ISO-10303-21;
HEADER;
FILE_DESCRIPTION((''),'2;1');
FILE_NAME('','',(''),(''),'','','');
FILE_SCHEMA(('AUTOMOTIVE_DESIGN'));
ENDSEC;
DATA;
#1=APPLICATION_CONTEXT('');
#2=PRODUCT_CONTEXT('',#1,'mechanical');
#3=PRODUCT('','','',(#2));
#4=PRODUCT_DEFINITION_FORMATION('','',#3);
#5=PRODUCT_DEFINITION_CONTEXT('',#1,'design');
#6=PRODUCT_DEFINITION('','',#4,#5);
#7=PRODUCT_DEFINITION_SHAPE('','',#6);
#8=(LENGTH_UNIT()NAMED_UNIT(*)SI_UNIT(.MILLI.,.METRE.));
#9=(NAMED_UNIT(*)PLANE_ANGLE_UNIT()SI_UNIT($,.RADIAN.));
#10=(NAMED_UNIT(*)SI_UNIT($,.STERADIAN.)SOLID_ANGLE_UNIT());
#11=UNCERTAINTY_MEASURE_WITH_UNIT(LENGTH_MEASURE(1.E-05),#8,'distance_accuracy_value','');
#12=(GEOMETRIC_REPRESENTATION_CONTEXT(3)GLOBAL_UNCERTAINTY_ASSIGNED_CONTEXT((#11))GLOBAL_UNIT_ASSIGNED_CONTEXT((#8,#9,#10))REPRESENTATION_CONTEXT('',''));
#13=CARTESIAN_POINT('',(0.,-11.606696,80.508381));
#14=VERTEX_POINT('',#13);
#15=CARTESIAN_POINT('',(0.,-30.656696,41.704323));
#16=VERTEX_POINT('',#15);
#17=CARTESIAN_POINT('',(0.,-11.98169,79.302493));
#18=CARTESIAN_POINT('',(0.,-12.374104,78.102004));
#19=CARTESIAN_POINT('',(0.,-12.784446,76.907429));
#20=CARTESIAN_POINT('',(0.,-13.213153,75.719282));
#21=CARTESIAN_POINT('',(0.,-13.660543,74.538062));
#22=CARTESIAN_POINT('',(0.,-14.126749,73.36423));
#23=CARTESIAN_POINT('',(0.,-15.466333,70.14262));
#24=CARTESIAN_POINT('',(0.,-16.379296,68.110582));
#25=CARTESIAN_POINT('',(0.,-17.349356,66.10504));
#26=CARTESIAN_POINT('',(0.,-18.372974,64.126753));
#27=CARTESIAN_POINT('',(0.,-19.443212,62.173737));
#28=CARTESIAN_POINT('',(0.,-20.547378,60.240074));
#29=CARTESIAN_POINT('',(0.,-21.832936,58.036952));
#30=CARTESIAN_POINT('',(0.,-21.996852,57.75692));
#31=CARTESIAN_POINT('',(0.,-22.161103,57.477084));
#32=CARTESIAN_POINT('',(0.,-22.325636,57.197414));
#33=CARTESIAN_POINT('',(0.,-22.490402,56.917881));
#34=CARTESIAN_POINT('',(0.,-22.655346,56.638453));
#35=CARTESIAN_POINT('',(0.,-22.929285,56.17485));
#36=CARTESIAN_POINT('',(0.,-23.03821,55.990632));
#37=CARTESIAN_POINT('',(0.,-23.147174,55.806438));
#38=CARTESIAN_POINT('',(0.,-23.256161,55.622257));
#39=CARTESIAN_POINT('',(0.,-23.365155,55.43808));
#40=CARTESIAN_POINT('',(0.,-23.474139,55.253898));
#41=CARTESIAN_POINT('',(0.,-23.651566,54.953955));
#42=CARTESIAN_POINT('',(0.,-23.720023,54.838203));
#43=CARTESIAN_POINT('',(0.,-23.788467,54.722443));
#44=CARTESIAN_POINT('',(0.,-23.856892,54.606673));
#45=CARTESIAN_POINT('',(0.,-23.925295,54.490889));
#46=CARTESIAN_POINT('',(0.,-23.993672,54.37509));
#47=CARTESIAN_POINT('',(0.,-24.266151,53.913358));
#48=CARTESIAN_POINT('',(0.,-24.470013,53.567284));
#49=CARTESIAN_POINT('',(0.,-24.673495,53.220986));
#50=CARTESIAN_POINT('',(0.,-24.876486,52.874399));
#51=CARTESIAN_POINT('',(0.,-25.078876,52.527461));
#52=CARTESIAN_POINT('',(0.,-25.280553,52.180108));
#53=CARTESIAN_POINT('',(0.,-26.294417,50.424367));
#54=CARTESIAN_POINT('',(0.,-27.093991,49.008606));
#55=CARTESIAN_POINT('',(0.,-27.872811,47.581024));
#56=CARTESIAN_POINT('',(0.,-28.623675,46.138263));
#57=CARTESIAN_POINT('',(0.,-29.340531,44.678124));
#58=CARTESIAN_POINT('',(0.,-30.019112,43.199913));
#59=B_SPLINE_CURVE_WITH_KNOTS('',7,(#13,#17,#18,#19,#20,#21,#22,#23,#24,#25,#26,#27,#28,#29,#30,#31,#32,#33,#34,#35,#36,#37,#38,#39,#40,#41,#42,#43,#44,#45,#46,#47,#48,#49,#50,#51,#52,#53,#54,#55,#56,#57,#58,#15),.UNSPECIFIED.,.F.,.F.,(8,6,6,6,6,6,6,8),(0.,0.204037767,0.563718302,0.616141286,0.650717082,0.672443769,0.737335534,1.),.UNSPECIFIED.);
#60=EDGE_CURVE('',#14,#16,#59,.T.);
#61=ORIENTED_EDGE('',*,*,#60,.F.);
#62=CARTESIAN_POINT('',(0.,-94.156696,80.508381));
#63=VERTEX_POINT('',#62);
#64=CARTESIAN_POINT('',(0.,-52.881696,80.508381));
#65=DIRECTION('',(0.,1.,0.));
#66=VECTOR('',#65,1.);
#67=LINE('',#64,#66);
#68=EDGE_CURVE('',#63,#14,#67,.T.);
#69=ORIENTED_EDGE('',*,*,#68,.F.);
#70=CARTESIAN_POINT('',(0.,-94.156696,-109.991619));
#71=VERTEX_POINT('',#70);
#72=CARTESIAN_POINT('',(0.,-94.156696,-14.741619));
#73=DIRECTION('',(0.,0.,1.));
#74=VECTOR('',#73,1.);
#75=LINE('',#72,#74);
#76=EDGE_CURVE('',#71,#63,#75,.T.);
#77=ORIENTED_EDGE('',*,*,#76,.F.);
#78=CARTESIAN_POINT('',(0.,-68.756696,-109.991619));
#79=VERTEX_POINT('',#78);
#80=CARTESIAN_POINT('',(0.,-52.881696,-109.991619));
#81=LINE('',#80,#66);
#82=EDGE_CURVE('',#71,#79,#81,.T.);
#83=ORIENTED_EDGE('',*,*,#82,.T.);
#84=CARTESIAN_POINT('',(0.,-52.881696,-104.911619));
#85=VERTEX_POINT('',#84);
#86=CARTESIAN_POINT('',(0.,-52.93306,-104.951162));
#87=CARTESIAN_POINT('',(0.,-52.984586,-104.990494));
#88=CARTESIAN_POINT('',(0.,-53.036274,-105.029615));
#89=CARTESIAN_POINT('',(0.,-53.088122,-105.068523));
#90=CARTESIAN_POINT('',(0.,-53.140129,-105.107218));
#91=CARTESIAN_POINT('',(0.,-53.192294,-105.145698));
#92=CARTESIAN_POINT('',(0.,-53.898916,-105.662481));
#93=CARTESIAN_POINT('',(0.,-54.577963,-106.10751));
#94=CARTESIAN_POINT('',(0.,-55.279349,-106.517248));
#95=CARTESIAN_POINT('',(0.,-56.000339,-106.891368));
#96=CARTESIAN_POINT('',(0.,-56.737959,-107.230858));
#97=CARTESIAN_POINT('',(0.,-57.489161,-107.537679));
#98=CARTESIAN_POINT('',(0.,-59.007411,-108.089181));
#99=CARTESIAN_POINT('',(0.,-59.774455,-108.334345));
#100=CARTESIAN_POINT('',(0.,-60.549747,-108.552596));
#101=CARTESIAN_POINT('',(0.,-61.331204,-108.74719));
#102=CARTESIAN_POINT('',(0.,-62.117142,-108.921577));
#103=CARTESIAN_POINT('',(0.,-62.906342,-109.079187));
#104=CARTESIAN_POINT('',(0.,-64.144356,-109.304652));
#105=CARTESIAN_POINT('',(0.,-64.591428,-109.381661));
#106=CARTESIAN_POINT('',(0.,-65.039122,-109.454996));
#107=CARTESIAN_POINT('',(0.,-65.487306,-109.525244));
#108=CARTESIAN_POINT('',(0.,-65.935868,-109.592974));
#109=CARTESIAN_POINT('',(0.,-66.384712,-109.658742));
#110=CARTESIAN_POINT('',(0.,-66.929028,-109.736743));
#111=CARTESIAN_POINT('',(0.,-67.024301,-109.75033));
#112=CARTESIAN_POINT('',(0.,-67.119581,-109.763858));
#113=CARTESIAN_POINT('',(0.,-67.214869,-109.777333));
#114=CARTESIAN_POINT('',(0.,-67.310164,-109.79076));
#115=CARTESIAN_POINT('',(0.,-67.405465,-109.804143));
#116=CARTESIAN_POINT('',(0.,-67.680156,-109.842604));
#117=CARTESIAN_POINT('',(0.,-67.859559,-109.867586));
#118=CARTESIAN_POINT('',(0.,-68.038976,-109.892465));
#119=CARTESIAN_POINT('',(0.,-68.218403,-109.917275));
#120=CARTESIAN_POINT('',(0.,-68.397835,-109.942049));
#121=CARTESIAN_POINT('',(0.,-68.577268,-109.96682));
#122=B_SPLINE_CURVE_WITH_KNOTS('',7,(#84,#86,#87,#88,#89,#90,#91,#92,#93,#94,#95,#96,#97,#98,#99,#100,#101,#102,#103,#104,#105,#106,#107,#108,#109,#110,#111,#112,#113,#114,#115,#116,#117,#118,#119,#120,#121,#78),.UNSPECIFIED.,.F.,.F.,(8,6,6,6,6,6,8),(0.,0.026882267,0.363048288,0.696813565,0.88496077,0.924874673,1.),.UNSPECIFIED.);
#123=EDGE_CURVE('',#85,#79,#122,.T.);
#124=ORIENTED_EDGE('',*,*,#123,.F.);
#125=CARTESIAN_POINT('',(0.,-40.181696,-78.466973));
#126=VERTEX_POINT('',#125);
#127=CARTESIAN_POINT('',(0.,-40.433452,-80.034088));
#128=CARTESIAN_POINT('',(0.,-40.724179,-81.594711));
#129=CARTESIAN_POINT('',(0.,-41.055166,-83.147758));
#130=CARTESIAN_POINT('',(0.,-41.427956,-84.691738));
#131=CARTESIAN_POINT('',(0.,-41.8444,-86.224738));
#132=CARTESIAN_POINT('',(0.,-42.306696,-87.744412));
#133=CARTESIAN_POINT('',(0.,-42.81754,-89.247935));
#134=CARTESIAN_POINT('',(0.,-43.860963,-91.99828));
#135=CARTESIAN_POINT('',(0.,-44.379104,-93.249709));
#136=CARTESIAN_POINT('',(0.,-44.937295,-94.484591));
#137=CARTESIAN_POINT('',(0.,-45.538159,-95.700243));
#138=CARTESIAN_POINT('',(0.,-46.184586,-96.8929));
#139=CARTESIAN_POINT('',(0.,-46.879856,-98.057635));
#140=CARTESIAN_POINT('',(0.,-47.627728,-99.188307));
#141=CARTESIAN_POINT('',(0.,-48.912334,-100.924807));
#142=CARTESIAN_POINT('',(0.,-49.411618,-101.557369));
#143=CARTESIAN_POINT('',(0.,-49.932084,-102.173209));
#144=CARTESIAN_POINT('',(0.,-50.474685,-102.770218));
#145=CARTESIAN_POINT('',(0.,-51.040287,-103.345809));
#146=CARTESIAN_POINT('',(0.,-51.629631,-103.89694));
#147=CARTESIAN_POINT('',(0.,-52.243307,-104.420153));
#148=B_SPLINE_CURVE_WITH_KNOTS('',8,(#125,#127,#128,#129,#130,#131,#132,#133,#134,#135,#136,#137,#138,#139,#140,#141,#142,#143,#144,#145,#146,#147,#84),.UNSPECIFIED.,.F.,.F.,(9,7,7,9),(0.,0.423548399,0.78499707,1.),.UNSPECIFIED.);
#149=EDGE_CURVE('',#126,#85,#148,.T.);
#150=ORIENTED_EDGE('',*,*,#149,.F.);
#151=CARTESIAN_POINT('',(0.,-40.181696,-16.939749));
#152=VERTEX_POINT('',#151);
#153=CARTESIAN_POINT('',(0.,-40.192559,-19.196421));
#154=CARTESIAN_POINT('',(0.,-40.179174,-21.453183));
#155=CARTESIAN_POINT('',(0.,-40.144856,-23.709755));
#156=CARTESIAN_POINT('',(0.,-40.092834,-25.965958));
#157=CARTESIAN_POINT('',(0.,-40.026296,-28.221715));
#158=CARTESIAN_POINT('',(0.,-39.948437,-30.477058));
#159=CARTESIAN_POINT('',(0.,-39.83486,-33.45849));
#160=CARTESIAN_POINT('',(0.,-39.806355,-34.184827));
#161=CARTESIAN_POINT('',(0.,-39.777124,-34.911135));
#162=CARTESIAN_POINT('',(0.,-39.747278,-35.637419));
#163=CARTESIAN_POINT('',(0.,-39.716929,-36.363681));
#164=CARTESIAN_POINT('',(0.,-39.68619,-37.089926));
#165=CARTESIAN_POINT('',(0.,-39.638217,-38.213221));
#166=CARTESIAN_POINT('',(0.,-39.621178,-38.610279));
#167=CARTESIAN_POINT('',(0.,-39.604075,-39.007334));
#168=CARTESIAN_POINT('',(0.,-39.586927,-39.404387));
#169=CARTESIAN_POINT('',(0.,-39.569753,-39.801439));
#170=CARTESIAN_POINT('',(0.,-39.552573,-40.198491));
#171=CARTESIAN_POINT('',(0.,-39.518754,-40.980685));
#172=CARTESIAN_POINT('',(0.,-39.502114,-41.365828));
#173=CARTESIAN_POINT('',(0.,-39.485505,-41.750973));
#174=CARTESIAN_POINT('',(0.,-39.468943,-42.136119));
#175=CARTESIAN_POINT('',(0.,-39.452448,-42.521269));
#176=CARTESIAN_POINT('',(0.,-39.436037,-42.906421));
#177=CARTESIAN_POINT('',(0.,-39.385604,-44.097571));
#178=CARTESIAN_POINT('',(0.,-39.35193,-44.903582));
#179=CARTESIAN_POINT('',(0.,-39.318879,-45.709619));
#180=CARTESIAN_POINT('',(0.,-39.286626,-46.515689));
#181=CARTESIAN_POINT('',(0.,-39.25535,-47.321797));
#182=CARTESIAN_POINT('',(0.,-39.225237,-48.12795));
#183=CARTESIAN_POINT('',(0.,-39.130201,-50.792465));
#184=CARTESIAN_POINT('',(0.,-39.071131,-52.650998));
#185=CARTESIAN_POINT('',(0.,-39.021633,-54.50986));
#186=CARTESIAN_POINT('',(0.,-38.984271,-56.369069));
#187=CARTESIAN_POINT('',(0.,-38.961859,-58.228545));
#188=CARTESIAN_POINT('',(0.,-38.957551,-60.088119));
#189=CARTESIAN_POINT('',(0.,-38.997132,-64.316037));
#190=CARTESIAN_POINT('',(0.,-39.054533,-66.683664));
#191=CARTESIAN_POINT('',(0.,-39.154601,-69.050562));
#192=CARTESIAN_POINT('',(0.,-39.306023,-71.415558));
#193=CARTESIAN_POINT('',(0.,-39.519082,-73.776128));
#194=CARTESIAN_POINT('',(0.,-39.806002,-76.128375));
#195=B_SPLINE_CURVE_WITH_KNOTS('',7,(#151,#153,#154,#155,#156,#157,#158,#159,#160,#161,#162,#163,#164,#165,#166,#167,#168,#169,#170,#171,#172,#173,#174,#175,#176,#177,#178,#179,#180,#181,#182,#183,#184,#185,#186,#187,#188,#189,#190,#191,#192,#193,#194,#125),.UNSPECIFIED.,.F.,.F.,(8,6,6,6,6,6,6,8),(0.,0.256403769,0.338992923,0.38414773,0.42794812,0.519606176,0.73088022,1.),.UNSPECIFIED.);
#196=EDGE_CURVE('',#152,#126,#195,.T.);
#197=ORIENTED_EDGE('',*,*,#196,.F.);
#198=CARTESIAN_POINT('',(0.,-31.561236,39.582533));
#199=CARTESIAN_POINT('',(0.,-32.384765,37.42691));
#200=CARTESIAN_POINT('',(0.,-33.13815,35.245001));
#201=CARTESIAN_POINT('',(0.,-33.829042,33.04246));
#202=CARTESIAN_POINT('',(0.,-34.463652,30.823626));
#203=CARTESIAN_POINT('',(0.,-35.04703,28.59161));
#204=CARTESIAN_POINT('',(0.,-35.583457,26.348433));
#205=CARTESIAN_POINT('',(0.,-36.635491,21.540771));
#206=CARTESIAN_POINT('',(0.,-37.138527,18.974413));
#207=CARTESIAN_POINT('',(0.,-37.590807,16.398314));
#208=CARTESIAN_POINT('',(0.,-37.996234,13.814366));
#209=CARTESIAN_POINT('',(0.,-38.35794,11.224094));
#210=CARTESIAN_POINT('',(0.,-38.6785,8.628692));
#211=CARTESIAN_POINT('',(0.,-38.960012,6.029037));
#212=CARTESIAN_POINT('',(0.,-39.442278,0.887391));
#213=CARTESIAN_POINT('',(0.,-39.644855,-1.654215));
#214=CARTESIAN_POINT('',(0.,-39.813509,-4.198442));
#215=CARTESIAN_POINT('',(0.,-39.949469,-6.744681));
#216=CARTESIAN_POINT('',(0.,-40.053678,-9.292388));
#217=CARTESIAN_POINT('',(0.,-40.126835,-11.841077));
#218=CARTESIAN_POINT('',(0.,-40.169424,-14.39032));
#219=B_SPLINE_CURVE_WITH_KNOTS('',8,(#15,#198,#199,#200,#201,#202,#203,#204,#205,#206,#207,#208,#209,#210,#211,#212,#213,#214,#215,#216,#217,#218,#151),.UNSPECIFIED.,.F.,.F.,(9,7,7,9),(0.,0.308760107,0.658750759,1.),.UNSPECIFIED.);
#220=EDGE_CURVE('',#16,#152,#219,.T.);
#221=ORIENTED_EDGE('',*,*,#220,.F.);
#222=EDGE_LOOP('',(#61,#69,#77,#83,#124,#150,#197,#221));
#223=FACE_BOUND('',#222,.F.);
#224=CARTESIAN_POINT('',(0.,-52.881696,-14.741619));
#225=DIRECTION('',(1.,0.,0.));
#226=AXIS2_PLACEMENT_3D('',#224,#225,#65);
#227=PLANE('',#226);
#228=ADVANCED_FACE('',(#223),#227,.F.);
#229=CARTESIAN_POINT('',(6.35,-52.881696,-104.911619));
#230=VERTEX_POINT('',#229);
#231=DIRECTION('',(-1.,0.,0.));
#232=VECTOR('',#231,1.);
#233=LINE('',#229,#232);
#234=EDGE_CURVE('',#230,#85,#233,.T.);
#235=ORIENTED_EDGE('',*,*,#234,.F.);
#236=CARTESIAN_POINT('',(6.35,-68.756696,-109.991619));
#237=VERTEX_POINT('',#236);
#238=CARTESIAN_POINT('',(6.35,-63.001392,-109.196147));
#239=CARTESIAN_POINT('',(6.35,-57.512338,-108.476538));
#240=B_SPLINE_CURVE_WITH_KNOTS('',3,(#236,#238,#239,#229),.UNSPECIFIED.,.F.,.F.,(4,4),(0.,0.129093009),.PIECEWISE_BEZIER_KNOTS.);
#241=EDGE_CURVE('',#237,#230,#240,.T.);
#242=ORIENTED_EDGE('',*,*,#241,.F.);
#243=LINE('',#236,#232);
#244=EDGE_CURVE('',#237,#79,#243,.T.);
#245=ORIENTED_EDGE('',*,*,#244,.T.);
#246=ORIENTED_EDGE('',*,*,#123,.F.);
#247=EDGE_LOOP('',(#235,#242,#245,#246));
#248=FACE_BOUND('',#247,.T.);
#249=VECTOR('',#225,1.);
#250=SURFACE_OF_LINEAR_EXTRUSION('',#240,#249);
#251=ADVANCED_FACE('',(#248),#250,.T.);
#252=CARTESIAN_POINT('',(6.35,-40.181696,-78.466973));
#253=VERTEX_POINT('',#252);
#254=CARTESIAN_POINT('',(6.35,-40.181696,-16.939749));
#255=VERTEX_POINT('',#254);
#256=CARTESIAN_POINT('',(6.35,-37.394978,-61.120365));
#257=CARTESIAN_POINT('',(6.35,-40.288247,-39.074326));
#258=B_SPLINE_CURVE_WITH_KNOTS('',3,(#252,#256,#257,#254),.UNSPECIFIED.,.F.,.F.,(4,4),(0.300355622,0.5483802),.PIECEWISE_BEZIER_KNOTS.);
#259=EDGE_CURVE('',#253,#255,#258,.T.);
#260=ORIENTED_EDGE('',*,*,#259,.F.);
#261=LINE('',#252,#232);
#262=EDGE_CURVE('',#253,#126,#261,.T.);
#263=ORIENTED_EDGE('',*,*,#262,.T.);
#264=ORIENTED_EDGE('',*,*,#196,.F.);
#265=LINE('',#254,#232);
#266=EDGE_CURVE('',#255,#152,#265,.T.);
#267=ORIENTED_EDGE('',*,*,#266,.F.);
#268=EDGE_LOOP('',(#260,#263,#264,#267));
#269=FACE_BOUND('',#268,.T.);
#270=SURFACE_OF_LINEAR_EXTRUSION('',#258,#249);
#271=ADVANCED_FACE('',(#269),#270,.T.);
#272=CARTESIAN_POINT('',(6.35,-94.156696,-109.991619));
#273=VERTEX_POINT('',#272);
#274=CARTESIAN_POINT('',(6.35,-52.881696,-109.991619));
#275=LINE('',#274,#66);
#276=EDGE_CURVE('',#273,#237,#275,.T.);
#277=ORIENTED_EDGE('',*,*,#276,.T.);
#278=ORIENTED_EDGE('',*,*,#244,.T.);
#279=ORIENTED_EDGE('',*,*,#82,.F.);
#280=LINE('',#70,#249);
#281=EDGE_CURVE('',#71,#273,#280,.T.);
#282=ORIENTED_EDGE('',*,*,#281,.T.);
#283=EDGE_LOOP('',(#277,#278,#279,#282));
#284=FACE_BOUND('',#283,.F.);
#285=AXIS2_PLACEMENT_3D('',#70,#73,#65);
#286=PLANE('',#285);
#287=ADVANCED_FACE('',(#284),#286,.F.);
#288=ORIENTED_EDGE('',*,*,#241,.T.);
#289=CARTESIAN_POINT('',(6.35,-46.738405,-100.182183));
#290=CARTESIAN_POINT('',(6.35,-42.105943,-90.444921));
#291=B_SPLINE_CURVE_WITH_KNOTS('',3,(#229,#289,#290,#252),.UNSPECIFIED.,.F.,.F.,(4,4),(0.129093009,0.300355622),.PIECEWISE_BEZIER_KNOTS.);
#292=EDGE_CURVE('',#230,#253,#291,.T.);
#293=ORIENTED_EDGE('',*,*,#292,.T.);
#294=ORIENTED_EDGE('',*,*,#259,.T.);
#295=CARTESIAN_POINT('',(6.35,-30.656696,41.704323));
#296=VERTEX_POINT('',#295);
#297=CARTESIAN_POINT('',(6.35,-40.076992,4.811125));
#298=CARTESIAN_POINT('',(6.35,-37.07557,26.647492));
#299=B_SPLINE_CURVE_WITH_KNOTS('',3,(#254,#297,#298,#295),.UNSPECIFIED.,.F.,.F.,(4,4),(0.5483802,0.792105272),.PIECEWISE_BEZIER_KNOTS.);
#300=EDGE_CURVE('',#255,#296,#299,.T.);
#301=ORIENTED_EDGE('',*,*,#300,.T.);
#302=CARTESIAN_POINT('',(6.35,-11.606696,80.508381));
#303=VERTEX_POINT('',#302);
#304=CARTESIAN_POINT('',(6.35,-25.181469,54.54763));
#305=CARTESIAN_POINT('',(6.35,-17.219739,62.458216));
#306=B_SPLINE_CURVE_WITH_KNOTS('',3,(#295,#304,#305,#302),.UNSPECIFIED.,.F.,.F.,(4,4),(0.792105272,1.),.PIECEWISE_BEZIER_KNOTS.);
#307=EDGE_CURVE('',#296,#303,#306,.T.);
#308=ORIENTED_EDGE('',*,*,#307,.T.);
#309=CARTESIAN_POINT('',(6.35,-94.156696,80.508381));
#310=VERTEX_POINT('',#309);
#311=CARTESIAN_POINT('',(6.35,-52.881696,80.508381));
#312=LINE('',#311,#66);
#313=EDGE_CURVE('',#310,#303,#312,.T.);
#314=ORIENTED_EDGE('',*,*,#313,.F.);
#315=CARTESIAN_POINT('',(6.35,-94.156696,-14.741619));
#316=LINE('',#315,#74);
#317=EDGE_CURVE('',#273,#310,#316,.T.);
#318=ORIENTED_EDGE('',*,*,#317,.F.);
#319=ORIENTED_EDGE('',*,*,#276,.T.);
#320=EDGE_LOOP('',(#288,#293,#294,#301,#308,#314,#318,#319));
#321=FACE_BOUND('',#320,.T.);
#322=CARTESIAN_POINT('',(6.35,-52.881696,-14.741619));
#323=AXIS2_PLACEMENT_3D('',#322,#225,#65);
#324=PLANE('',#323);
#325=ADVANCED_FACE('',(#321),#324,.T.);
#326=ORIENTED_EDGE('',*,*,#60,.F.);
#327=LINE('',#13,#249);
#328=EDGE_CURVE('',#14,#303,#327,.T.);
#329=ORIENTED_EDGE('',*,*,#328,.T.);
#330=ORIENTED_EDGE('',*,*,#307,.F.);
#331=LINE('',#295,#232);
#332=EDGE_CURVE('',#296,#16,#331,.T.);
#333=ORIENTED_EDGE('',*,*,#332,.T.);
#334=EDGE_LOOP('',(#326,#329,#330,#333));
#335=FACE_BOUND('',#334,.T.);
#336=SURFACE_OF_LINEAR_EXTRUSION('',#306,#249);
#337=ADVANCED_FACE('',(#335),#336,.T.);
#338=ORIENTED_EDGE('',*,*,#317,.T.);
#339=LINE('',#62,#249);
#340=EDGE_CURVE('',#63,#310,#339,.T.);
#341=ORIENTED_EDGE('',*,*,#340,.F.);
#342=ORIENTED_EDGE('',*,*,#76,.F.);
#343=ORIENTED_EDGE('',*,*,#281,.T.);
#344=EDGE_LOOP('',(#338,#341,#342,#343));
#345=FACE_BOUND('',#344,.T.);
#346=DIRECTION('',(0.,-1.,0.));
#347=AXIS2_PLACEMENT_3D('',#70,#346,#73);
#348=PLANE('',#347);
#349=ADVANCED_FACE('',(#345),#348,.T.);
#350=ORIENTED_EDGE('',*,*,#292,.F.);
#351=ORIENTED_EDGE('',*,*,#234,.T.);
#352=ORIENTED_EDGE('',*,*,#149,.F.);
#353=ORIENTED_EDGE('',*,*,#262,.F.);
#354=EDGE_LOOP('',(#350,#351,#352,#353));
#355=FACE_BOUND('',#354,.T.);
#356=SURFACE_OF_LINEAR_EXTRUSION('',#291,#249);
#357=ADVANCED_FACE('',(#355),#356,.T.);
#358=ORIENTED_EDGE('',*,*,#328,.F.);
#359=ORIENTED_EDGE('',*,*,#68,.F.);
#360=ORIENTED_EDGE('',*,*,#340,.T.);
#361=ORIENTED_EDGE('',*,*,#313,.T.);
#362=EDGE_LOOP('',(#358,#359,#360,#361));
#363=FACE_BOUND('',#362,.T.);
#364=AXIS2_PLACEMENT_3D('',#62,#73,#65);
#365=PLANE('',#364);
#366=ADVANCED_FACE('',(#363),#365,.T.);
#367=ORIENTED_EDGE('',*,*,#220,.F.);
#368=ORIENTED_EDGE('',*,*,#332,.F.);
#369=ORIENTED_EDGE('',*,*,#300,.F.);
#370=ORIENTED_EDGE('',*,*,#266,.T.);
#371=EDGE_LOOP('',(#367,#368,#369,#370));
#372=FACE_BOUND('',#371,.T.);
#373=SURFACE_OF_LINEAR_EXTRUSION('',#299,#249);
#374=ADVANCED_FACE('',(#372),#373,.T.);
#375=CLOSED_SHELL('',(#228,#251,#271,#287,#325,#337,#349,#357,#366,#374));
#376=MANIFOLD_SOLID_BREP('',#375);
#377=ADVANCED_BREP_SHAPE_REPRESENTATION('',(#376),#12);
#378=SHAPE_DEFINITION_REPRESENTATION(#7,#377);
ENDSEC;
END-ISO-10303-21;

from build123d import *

# Parameters (mm, degrees)
F0_W     = 82.55
F0_H     = 190.5
F1_DEPTH = 6.35
F2_W     = 22.225
F2_H     = 5.08
F2_W_2   = 19.05
F2_H_2   = 26.4446459055
F2_H_3   = 61.5272244272
F2_H_4   = 58.6440721527
F3_DEPTH = 12.7


# Not quite as in the source:
# - a feature names something its author has since deleted; it is built from what else it names


with BuildPart() as f1:
    # F0 (on Right) → F1 (new body)
    with BuildSketch(Plane.YZ):
        with Locations((-52.8816960618, -14.7416193426)):
            Rectangle(F0_W, F0_H)
    extrude(amount=F1_DEPTH)

    # F2 (on face) → F3 (cut)
    with BuildSketch(Plane.YZ.offset(6.35)):
        with BuildLine():
            add(Edge.make_bspline(
                [(-52.8816960618, -104.9116193426), (-46.7384052574, -100.1821825443), (-42.1059434018, -90.4449211167), (-40.1816960618, -78.4669734371)],
                knots=[0.1290930094, 0.1290930094, 0.1290930094, 0.1290930094, 0.3003556222, 0.3003556222, 0.3003556222, 0.3003556222], degree=3))
            Line((-52.8816960618, -104.9116193426), (-30.6566960618, -104.9116193426))
            Line((-30.6566960618, -104.9116193426), (-30.6566960618, -78.4669734371))
            Line((-30.6566960618, -78.4669734371), (-40.1816960618, -78.4669734371))
        make_face()
        with Locations((-41.7691960618, -107.4516193426)):
            Rectangle(F2_W, F2_H)
        with BuildLine():
            add(Edge.make_bspline(
                [(-68.7566960618, -109.9916193426), (-63.0013923205, -109.1961470607), (-57.5123383521, -108.4765376811), (-52.8816960618, -104.9116193426)],
                knots=[0, 0, 0, 0, 0.1290930094, 0.1290930094, 0.1290930094, 0.1290930094], degree=3))
            Line((-68.7566960618, -109.9916193426), (-52.8816960618, -109.9916193426))
            Line((-52.8816960618, -109.9916193426), (-52.8816960618, -104.9116193426))
        make_face()
        with Locations((-21.1316960618, -107.4516193426)):
            Rectangle(F2_W_2, F2_H)
        with Locations((-21.1316960618, -91.6892963898)):
            Rectangle(F2_W_2, F2_H_2)
        with Locations((-21.1316960618, -47.7033612235)):
            Rectangle(F2_W_2, F2_H_3)
        with BuildLine():
            add(Edge.make_bspline(
                [(-40.1816960618, -78.4669734371), (-37.3949778969, -61.1203653983), (-40.2882470853, -39.0743255012), (-40.1816960618, -16.9397490099)],
                knots=[0.3003556222, 0.3003556222, 0.3003556222, 0.3003556222, 0.5483802, 0.5483802, 0.5483802, 0.5483802], degree=3))
            Line((-40.1816960618, -78.4669734371), (-30.6566960618, -78.4669734371))
            Line((-30.6566960618, -78.4669734371), (-30.6566960618, -16.9397490099))
            Line((-30.6566960618, -16.9397490099), (-40.1816960618, -16.9397490099))
        make_face()
        with BuildLine():
            add(Edge.make_bspline(
                [(-40.1816960618, -16.9397490099), (-40.0769921004, 4.8111245801), (-37.0755702459, 26.6474918057), (-30.6566960618, 41.7043231428)],
                knots=[0.5483802, 0.5483802, 0.5483802, 0.5483802, 0.7921052716, 0.7921052716, 0.7921052716, 0.7921052716], degree=3))
            Line((-40.1816960618, -16.9397490099), (-30.6566960618, -16.9397490099))
            Line((-30.6566960618, -16.9397490099), (-30.6566960618, 41.7043231428))
        make_face()
        with Locations((-21.1316960618, 12.3822870664)):
            Rectangle(F2_W_2, F2_H_4)
        with BuildLine():
            add(Edge.make_bspline(
                [(-30.6566960618, 41.7043231428), (-25.1814690079, 54.5476299155), (-17.2197388458, 62.4582162191), (-11.6066960618, 80.5083806574)],
                knots=[0.7921052716, 0.7921052716, 0.7921052716, 0.7921052716, 1, 1, 1, 1], degree=3))
            Line((-30.6566960618, 41.7043231428), (-11.6066960618, 41.7043231428))
            Line((-11.6066960618, 41.7043231428), (-11.6066960618, 80.5083806574))
        make_face()
    extrude(amount=-F3_DEPTH, mode=Mode.SUBTRACT)


solid = f1.part
